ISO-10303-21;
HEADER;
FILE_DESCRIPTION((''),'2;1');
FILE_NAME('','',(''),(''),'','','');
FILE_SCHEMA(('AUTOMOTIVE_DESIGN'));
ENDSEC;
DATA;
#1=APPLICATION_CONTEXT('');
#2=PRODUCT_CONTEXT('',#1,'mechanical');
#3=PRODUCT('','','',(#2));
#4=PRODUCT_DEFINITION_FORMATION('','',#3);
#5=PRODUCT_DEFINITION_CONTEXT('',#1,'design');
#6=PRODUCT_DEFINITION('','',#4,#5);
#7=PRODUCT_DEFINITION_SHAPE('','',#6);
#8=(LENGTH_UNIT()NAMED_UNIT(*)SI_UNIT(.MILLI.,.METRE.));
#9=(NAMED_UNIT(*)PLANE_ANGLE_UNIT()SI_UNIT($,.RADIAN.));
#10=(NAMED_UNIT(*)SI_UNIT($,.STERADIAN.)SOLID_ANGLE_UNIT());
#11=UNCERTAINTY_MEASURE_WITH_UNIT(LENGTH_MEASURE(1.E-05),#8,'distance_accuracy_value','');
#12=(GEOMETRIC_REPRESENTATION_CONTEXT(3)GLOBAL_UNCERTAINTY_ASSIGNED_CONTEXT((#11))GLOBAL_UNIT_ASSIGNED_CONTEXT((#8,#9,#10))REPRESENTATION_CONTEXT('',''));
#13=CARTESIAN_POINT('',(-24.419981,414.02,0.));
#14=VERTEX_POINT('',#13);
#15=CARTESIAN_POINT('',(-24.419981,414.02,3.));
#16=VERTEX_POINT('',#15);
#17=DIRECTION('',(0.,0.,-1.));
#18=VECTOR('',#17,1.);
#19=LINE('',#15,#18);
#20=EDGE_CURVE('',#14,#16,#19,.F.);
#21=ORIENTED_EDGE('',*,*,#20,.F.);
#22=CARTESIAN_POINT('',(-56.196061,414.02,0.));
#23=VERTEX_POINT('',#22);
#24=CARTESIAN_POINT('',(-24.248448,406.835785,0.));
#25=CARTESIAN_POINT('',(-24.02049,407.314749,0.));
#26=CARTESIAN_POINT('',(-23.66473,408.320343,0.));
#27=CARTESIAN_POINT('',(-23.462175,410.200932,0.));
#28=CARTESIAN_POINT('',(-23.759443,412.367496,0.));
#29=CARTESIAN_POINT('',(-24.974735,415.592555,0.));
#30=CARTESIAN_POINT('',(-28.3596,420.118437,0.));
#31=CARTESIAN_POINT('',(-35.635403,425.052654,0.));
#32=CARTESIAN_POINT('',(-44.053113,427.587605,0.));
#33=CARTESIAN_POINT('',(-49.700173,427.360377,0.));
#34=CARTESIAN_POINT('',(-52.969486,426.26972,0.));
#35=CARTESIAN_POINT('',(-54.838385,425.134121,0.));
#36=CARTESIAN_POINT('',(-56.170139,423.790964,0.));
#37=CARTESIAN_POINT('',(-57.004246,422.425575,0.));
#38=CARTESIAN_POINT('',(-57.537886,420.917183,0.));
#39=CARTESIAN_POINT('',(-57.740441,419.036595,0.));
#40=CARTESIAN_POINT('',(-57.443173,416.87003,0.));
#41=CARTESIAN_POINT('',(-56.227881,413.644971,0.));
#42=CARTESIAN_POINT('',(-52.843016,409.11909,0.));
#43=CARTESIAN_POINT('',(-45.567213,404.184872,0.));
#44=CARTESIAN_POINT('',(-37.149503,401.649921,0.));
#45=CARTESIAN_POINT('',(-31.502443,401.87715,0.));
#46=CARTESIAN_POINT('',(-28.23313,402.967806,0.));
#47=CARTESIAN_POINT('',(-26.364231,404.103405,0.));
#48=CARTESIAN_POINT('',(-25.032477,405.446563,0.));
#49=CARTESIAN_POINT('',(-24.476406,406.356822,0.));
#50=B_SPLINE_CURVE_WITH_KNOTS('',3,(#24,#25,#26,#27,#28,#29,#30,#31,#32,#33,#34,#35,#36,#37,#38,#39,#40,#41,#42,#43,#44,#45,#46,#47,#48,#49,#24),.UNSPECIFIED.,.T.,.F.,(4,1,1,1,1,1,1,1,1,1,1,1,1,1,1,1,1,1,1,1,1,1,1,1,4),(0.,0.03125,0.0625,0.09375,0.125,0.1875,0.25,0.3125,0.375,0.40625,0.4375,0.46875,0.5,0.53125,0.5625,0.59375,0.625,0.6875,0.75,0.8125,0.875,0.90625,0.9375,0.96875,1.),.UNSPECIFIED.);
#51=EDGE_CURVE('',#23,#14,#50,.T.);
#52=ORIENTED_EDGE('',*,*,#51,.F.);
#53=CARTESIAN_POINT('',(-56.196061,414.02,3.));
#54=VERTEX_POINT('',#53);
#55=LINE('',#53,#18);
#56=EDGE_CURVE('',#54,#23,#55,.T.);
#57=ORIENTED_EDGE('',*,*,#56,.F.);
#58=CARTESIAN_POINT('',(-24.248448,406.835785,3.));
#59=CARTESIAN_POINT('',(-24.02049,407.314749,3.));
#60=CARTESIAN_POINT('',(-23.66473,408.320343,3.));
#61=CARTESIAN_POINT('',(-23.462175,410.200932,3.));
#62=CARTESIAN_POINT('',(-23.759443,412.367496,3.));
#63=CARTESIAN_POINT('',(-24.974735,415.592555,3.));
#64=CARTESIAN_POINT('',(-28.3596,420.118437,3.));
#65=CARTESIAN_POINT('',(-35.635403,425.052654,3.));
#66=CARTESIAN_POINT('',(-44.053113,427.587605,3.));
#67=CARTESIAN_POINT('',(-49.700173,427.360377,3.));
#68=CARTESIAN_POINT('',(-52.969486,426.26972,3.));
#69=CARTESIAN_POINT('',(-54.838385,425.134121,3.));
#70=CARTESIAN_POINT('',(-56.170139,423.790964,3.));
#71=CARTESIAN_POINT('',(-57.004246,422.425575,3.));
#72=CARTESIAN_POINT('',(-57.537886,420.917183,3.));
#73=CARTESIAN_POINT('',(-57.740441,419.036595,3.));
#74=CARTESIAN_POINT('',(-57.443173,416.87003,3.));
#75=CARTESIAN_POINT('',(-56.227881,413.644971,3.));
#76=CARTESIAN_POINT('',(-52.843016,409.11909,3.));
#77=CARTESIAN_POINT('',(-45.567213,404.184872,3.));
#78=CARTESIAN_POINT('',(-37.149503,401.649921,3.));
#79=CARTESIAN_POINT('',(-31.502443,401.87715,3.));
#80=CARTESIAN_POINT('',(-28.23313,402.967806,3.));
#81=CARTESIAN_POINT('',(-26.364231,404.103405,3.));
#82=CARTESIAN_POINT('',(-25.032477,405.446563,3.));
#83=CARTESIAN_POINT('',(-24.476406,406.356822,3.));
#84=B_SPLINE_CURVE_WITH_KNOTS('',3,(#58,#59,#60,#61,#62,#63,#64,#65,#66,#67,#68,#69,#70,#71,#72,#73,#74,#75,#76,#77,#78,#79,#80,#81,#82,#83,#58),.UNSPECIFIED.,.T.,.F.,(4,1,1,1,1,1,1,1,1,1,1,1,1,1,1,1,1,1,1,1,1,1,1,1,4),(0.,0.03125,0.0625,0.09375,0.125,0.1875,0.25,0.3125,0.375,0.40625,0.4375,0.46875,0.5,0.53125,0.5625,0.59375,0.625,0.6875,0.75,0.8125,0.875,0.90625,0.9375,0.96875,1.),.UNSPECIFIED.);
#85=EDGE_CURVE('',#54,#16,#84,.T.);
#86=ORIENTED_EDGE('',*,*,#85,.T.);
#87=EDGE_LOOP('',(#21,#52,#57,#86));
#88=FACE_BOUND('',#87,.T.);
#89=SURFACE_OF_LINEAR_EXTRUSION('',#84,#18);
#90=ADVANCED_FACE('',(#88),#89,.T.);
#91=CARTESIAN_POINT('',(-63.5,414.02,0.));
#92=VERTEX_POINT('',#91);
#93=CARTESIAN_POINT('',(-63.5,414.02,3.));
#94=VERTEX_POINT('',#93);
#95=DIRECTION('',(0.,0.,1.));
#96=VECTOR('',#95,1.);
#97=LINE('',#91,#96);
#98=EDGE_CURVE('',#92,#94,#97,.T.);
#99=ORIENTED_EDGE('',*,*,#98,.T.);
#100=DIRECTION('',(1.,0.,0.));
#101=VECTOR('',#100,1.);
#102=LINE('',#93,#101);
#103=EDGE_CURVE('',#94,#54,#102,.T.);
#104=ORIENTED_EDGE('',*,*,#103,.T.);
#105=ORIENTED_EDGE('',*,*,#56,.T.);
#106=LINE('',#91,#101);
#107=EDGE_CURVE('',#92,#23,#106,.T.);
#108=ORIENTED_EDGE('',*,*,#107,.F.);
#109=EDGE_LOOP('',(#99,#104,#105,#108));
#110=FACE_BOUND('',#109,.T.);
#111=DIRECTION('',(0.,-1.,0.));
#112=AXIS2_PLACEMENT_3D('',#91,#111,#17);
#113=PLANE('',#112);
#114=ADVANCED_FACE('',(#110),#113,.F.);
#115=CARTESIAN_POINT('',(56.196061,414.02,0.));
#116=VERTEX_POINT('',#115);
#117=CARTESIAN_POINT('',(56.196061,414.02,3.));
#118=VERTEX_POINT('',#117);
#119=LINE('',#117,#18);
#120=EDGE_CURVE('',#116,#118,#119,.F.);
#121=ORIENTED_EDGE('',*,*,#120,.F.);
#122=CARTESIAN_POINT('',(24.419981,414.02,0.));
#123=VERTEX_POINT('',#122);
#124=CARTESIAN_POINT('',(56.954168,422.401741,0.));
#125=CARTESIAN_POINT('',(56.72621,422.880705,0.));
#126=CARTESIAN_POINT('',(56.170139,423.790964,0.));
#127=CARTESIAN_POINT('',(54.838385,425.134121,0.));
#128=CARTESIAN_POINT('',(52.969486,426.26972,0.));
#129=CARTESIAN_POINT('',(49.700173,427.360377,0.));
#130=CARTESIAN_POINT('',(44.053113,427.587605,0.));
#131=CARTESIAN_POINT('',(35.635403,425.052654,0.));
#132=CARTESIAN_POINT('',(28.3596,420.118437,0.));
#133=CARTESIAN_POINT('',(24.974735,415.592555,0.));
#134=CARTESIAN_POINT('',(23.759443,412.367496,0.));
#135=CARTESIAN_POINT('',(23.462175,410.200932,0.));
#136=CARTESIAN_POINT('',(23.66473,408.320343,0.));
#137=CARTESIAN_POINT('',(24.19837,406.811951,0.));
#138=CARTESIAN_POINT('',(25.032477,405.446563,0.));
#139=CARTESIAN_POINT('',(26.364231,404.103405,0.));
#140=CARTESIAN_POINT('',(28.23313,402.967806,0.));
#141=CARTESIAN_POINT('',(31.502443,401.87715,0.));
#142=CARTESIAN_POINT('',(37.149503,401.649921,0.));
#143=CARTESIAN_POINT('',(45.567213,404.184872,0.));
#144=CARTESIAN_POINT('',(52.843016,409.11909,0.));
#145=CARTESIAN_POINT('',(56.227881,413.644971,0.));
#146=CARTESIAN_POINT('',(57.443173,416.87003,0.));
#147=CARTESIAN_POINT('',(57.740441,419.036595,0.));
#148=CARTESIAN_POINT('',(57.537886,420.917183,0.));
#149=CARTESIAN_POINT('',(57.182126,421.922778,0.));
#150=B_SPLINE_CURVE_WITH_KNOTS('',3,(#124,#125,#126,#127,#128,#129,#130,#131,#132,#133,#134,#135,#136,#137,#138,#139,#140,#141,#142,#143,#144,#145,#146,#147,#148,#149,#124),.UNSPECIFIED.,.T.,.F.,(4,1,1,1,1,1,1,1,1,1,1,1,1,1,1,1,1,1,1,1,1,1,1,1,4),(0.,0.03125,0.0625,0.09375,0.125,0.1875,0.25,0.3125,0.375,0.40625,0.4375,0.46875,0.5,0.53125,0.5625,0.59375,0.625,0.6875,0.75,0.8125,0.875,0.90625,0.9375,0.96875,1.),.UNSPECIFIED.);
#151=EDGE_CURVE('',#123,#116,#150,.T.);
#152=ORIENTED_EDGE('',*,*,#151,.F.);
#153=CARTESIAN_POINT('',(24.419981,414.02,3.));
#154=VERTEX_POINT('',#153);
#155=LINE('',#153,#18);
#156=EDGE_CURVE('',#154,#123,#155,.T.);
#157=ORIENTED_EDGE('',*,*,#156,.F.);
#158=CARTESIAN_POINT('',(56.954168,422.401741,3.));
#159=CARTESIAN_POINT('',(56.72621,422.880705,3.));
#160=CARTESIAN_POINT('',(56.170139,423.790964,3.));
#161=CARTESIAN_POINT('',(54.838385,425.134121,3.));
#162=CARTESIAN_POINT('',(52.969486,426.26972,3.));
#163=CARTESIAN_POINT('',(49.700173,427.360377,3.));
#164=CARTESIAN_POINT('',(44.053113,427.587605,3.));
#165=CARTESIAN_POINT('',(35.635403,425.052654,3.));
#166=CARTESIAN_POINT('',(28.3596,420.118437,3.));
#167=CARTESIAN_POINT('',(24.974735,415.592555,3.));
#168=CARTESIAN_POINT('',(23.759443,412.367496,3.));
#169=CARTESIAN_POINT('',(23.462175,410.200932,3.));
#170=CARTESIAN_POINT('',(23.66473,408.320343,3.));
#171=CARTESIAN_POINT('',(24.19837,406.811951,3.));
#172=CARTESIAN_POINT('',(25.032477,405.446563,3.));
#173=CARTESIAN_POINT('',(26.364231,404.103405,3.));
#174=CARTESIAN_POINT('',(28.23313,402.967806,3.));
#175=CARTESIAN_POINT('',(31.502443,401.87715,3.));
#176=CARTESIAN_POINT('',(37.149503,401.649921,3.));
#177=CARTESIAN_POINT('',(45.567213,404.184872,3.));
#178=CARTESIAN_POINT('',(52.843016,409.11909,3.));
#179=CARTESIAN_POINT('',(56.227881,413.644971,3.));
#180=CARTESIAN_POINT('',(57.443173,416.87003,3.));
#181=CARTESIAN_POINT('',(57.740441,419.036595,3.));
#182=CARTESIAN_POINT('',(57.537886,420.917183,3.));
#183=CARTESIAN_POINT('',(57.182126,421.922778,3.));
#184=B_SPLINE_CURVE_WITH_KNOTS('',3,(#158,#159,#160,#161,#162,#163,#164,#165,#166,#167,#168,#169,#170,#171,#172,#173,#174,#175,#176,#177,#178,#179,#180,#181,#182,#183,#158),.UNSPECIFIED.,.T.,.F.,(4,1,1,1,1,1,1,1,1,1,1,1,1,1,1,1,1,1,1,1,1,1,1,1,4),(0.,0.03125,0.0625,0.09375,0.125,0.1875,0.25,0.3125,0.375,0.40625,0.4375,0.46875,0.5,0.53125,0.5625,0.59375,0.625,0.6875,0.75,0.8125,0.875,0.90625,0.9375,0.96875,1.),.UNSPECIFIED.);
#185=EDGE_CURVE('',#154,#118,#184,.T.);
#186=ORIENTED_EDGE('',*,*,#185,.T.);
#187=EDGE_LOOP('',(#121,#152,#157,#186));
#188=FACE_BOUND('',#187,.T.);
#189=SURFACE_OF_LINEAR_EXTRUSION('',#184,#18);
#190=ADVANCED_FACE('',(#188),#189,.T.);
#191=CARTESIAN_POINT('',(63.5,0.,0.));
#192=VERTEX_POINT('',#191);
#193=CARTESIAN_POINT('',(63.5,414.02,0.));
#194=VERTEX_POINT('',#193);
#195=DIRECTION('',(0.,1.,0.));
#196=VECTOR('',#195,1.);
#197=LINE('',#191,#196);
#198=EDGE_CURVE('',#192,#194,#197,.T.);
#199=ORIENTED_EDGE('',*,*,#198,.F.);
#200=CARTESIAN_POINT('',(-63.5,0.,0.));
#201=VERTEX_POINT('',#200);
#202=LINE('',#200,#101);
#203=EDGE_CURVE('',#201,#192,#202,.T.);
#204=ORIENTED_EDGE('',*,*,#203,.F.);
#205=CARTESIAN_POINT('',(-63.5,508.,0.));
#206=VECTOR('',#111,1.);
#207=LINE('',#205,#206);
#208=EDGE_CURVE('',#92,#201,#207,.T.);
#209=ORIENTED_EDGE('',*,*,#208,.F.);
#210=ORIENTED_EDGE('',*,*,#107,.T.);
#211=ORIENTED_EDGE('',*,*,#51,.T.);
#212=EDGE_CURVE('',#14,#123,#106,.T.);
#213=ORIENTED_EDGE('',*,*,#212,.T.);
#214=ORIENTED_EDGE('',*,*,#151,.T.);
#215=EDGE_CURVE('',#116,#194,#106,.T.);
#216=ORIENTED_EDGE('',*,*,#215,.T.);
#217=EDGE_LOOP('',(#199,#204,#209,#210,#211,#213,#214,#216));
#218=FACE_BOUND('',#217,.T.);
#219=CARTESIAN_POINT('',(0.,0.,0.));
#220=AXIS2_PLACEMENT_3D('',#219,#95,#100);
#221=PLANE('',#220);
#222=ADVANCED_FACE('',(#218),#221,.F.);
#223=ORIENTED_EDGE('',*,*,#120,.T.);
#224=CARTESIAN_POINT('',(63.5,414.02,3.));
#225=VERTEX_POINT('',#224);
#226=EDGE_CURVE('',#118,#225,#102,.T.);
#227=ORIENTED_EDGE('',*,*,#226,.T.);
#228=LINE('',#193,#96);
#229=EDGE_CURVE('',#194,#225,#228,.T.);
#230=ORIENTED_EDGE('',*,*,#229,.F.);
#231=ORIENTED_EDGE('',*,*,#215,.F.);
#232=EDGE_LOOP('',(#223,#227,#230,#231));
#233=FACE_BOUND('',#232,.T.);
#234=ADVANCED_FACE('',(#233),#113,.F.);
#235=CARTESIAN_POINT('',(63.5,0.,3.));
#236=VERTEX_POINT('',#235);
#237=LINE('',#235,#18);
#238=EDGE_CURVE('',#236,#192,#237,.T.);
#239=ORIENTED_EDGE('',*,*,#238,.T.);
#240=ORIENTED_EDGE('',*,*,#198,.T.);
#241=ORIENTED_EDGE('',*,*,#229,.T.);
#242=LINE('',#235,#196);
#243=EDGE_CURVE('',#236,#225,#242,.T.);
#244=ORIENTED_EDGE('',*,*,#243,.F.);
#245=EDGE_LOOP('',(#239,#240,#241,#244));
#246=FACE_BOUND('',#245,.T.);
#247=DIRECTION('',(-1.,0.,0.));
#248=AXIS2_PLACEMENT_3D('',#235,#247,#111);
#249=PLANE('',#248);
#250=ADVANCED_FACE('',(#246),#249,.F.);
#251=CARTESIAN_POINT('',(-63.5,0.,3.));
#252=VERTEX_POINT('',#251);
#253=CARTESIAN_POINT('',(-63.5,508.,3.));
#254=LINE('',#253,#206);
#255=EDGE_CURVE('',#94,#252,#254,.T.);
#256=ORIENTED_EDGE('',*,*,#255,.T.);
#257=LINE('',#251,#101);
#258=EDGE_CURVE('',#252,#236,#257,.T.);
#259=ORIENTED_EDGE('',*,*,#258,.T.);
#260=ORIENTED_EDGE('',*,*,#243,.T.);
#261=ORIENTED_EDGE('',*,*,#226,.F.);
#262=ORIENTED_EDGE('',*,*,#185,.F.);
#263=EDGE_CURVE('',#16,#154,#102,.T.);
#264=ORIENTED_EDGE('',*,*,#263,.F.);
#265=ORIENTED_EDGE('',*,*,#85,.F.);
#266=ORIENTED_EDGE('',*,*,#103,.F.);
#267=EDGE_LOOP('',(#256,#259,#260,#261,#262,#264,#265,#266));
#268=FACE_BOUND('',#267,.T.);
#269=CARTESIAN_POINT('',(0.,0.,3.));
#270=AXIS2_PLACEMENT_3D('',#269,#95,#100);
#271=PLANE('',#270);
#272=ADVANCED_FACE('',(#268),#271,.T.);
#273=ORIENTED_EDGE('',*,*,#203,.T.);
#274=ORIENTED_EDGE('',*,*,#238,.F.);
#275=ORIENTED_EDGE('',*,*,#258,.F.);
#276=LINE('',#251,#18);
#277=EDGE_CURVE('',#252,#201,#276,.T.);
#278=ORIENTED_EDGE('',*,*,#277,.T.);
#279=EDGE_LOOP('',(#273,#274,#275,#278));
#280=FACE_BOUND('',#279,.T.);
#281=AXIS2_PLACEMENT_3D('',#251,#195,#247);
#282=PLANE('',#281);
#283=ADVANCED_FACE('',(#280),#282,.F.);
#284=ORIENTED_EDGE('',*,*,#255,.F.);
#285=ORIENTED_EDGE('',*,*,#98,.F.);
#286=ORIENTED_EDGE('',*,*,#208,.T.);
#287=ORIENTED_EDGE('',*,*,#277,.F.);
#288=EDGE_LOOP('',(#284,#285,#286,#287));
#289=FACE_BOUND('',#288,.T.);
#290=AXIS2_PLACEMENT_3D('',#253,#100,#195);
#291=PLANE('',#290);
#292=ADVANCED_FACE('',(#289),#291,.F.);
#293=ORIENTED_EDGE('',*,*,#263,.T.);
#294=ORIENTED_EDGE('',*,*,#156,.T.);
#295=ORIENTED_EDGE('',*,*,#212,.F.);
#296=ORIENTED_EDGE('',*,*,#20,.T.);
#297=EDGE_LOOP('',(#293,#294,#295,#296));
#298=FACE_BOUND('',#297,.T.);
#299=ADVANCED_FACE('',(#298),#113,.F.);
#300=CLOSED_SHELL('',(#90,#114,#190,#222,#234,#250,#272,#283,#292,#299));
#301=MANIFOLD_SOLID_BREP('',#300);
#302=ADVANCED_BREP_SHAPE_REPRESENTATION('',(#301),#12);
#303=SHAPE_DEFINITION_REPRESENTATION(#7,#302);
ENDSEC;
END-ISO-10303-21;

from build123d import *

# Parameters (mm, degrees)
BOSS_EXTRUDE1_OUTLINE_W = 127
BOSS_EXTRUDE1_OUTLINE_H = 508
BOSS_EXTRUDE1_DEPTH     = 3
SKETCH2_W               = 127
SKETCH2_H               = 93.98
CLEARANCE_DEPTH         = 512.962156917


# Read off the part's stored shape, not the designer's step: Boss-Extrude1
with BuildPart() as part:
    # Boss-Extrude1 outline → Boss-Extrude1 (new body)
    with BuildSketch(Plane.XY):
        with Locations((0, 254)):
            Rectangle(BOSS_EXTRUDE1_OUTLINE_W, BOSS_EXTRUDE1_OUTLINE_H)
        with BuildLine():
            add(Edge.make_bspline(
                [(-24.248447896, 406.835785182), (-24.020490126, 407.314748566), (-23.664729979, 408.320343277), (-23.462175176, 410.200931921), (-23.759442829, 412.367496281), (-24.97473491, 415.592555217), (-28.359599913, 420.118436778), (-35.635403135, 425.052654423), (-44.053113042, 427.587605354), (-49.700172647, 427.360376803), (-52.969485775, 426.269720281), (-54.838384763, 425.134120988), (-56.170139269, 423.790963502), (-57.004245667, 422.425575267), (-57.537885889, 420.9171832), (-57.740440691, 419.036594556), (-57.443173039, 416.870030196), (-56.227880958, 413.644971261), (-52.843015955, 409.119089699), (-45.567212732, 404.184872054), (-37.149502826, 401.649921123), (-31.502443221, 401.877149674), (-28.233130092, 402.967806196), (-26.364231105, 404.10340549), (-25.032476598, 405.446562975), (-24.476405666, 406.356821798), (-24.248447896, 406.835785182)],
                knots=[0, 0, 0, 0, 0.03125, 0.0625, 0.09375, 0.125, 0.1875, 0.25, 0.3125, 0.375, 0.40625, 0.4375, 0.46875, 0.5, 0.53125, 0.5625, 0.59375, 0.625, 0.6875, 0.75, 0.8125, 0.875, 0.90625, 0.9375, 0.96875, 1, 1, 1, 1], degree=3))
        make_face(mode=Mode.SUBTRACT)
        with BuildLine():
            add(Edge.make_bspline(
                [(56.954167971, 422.401741295), (56.726210201, 422.880704679), (56.170139269, 423.790963502), (54.838384763, 425.134120988), (52.969485775, 426.269720281), (49.700172647, 427.360376803), (44.053113042, 427.587605354), (35.635403135, 425.052654423), (28.359599913, 420.118436778), (24.97473491, 415.592555217), (23.759442829, 412.367496281), (23.462175176, 410.200931921), (23.664729979, 408.320343277), (24.1983702, 406.81195121), (25.032476598, 405.446562975), (26.364231105, 404.10340549), (28.233130092, 402.967806196), (31.502443221, 401.877149674), (37.149502826, 401.649921123), (45.567212732, 404.184872054), (52.843015955, 409.119089699), (56.227880958, 413.644971261), (57.443173039, 416.870030196), (57.740440691, 419.036594556), (57.537885889, 420.9171832), (57.182125741, 421.922777912), (56.954167971, 422.401741295)],
                knots=[0, 0, 0, 0, 0.03125, 0.0625, 0.09375, 0.125, 0.1875, 0.25, 0.3125, 0.375, 0.40625, 0.4375, 0.46875, 0.5, 0.53125, 0.5625, 0.59375, 0.625, 0.6875, 0.75, 0.8125, 0.875, 0.90625, 0.9375, 0.96875, 1, 1, 1, 1], degree=3))
        make_face(mode=Mode.SUBTRACT)
    extrude(amount=BOSS_EXTRUDE1_DEPTH)

    # Sketch2 → Clearance (cut, through all)
    with BuildSketch(Plane.XY.offset(3)):
        with Locations((0, 461.01)):
            Rectangle(SKETCH2_W, SKETCH2_H)
    extrude(amount=-CLEARANCE_DEPTH, mode=Mode.SUBTRACT)


solid = part.part
